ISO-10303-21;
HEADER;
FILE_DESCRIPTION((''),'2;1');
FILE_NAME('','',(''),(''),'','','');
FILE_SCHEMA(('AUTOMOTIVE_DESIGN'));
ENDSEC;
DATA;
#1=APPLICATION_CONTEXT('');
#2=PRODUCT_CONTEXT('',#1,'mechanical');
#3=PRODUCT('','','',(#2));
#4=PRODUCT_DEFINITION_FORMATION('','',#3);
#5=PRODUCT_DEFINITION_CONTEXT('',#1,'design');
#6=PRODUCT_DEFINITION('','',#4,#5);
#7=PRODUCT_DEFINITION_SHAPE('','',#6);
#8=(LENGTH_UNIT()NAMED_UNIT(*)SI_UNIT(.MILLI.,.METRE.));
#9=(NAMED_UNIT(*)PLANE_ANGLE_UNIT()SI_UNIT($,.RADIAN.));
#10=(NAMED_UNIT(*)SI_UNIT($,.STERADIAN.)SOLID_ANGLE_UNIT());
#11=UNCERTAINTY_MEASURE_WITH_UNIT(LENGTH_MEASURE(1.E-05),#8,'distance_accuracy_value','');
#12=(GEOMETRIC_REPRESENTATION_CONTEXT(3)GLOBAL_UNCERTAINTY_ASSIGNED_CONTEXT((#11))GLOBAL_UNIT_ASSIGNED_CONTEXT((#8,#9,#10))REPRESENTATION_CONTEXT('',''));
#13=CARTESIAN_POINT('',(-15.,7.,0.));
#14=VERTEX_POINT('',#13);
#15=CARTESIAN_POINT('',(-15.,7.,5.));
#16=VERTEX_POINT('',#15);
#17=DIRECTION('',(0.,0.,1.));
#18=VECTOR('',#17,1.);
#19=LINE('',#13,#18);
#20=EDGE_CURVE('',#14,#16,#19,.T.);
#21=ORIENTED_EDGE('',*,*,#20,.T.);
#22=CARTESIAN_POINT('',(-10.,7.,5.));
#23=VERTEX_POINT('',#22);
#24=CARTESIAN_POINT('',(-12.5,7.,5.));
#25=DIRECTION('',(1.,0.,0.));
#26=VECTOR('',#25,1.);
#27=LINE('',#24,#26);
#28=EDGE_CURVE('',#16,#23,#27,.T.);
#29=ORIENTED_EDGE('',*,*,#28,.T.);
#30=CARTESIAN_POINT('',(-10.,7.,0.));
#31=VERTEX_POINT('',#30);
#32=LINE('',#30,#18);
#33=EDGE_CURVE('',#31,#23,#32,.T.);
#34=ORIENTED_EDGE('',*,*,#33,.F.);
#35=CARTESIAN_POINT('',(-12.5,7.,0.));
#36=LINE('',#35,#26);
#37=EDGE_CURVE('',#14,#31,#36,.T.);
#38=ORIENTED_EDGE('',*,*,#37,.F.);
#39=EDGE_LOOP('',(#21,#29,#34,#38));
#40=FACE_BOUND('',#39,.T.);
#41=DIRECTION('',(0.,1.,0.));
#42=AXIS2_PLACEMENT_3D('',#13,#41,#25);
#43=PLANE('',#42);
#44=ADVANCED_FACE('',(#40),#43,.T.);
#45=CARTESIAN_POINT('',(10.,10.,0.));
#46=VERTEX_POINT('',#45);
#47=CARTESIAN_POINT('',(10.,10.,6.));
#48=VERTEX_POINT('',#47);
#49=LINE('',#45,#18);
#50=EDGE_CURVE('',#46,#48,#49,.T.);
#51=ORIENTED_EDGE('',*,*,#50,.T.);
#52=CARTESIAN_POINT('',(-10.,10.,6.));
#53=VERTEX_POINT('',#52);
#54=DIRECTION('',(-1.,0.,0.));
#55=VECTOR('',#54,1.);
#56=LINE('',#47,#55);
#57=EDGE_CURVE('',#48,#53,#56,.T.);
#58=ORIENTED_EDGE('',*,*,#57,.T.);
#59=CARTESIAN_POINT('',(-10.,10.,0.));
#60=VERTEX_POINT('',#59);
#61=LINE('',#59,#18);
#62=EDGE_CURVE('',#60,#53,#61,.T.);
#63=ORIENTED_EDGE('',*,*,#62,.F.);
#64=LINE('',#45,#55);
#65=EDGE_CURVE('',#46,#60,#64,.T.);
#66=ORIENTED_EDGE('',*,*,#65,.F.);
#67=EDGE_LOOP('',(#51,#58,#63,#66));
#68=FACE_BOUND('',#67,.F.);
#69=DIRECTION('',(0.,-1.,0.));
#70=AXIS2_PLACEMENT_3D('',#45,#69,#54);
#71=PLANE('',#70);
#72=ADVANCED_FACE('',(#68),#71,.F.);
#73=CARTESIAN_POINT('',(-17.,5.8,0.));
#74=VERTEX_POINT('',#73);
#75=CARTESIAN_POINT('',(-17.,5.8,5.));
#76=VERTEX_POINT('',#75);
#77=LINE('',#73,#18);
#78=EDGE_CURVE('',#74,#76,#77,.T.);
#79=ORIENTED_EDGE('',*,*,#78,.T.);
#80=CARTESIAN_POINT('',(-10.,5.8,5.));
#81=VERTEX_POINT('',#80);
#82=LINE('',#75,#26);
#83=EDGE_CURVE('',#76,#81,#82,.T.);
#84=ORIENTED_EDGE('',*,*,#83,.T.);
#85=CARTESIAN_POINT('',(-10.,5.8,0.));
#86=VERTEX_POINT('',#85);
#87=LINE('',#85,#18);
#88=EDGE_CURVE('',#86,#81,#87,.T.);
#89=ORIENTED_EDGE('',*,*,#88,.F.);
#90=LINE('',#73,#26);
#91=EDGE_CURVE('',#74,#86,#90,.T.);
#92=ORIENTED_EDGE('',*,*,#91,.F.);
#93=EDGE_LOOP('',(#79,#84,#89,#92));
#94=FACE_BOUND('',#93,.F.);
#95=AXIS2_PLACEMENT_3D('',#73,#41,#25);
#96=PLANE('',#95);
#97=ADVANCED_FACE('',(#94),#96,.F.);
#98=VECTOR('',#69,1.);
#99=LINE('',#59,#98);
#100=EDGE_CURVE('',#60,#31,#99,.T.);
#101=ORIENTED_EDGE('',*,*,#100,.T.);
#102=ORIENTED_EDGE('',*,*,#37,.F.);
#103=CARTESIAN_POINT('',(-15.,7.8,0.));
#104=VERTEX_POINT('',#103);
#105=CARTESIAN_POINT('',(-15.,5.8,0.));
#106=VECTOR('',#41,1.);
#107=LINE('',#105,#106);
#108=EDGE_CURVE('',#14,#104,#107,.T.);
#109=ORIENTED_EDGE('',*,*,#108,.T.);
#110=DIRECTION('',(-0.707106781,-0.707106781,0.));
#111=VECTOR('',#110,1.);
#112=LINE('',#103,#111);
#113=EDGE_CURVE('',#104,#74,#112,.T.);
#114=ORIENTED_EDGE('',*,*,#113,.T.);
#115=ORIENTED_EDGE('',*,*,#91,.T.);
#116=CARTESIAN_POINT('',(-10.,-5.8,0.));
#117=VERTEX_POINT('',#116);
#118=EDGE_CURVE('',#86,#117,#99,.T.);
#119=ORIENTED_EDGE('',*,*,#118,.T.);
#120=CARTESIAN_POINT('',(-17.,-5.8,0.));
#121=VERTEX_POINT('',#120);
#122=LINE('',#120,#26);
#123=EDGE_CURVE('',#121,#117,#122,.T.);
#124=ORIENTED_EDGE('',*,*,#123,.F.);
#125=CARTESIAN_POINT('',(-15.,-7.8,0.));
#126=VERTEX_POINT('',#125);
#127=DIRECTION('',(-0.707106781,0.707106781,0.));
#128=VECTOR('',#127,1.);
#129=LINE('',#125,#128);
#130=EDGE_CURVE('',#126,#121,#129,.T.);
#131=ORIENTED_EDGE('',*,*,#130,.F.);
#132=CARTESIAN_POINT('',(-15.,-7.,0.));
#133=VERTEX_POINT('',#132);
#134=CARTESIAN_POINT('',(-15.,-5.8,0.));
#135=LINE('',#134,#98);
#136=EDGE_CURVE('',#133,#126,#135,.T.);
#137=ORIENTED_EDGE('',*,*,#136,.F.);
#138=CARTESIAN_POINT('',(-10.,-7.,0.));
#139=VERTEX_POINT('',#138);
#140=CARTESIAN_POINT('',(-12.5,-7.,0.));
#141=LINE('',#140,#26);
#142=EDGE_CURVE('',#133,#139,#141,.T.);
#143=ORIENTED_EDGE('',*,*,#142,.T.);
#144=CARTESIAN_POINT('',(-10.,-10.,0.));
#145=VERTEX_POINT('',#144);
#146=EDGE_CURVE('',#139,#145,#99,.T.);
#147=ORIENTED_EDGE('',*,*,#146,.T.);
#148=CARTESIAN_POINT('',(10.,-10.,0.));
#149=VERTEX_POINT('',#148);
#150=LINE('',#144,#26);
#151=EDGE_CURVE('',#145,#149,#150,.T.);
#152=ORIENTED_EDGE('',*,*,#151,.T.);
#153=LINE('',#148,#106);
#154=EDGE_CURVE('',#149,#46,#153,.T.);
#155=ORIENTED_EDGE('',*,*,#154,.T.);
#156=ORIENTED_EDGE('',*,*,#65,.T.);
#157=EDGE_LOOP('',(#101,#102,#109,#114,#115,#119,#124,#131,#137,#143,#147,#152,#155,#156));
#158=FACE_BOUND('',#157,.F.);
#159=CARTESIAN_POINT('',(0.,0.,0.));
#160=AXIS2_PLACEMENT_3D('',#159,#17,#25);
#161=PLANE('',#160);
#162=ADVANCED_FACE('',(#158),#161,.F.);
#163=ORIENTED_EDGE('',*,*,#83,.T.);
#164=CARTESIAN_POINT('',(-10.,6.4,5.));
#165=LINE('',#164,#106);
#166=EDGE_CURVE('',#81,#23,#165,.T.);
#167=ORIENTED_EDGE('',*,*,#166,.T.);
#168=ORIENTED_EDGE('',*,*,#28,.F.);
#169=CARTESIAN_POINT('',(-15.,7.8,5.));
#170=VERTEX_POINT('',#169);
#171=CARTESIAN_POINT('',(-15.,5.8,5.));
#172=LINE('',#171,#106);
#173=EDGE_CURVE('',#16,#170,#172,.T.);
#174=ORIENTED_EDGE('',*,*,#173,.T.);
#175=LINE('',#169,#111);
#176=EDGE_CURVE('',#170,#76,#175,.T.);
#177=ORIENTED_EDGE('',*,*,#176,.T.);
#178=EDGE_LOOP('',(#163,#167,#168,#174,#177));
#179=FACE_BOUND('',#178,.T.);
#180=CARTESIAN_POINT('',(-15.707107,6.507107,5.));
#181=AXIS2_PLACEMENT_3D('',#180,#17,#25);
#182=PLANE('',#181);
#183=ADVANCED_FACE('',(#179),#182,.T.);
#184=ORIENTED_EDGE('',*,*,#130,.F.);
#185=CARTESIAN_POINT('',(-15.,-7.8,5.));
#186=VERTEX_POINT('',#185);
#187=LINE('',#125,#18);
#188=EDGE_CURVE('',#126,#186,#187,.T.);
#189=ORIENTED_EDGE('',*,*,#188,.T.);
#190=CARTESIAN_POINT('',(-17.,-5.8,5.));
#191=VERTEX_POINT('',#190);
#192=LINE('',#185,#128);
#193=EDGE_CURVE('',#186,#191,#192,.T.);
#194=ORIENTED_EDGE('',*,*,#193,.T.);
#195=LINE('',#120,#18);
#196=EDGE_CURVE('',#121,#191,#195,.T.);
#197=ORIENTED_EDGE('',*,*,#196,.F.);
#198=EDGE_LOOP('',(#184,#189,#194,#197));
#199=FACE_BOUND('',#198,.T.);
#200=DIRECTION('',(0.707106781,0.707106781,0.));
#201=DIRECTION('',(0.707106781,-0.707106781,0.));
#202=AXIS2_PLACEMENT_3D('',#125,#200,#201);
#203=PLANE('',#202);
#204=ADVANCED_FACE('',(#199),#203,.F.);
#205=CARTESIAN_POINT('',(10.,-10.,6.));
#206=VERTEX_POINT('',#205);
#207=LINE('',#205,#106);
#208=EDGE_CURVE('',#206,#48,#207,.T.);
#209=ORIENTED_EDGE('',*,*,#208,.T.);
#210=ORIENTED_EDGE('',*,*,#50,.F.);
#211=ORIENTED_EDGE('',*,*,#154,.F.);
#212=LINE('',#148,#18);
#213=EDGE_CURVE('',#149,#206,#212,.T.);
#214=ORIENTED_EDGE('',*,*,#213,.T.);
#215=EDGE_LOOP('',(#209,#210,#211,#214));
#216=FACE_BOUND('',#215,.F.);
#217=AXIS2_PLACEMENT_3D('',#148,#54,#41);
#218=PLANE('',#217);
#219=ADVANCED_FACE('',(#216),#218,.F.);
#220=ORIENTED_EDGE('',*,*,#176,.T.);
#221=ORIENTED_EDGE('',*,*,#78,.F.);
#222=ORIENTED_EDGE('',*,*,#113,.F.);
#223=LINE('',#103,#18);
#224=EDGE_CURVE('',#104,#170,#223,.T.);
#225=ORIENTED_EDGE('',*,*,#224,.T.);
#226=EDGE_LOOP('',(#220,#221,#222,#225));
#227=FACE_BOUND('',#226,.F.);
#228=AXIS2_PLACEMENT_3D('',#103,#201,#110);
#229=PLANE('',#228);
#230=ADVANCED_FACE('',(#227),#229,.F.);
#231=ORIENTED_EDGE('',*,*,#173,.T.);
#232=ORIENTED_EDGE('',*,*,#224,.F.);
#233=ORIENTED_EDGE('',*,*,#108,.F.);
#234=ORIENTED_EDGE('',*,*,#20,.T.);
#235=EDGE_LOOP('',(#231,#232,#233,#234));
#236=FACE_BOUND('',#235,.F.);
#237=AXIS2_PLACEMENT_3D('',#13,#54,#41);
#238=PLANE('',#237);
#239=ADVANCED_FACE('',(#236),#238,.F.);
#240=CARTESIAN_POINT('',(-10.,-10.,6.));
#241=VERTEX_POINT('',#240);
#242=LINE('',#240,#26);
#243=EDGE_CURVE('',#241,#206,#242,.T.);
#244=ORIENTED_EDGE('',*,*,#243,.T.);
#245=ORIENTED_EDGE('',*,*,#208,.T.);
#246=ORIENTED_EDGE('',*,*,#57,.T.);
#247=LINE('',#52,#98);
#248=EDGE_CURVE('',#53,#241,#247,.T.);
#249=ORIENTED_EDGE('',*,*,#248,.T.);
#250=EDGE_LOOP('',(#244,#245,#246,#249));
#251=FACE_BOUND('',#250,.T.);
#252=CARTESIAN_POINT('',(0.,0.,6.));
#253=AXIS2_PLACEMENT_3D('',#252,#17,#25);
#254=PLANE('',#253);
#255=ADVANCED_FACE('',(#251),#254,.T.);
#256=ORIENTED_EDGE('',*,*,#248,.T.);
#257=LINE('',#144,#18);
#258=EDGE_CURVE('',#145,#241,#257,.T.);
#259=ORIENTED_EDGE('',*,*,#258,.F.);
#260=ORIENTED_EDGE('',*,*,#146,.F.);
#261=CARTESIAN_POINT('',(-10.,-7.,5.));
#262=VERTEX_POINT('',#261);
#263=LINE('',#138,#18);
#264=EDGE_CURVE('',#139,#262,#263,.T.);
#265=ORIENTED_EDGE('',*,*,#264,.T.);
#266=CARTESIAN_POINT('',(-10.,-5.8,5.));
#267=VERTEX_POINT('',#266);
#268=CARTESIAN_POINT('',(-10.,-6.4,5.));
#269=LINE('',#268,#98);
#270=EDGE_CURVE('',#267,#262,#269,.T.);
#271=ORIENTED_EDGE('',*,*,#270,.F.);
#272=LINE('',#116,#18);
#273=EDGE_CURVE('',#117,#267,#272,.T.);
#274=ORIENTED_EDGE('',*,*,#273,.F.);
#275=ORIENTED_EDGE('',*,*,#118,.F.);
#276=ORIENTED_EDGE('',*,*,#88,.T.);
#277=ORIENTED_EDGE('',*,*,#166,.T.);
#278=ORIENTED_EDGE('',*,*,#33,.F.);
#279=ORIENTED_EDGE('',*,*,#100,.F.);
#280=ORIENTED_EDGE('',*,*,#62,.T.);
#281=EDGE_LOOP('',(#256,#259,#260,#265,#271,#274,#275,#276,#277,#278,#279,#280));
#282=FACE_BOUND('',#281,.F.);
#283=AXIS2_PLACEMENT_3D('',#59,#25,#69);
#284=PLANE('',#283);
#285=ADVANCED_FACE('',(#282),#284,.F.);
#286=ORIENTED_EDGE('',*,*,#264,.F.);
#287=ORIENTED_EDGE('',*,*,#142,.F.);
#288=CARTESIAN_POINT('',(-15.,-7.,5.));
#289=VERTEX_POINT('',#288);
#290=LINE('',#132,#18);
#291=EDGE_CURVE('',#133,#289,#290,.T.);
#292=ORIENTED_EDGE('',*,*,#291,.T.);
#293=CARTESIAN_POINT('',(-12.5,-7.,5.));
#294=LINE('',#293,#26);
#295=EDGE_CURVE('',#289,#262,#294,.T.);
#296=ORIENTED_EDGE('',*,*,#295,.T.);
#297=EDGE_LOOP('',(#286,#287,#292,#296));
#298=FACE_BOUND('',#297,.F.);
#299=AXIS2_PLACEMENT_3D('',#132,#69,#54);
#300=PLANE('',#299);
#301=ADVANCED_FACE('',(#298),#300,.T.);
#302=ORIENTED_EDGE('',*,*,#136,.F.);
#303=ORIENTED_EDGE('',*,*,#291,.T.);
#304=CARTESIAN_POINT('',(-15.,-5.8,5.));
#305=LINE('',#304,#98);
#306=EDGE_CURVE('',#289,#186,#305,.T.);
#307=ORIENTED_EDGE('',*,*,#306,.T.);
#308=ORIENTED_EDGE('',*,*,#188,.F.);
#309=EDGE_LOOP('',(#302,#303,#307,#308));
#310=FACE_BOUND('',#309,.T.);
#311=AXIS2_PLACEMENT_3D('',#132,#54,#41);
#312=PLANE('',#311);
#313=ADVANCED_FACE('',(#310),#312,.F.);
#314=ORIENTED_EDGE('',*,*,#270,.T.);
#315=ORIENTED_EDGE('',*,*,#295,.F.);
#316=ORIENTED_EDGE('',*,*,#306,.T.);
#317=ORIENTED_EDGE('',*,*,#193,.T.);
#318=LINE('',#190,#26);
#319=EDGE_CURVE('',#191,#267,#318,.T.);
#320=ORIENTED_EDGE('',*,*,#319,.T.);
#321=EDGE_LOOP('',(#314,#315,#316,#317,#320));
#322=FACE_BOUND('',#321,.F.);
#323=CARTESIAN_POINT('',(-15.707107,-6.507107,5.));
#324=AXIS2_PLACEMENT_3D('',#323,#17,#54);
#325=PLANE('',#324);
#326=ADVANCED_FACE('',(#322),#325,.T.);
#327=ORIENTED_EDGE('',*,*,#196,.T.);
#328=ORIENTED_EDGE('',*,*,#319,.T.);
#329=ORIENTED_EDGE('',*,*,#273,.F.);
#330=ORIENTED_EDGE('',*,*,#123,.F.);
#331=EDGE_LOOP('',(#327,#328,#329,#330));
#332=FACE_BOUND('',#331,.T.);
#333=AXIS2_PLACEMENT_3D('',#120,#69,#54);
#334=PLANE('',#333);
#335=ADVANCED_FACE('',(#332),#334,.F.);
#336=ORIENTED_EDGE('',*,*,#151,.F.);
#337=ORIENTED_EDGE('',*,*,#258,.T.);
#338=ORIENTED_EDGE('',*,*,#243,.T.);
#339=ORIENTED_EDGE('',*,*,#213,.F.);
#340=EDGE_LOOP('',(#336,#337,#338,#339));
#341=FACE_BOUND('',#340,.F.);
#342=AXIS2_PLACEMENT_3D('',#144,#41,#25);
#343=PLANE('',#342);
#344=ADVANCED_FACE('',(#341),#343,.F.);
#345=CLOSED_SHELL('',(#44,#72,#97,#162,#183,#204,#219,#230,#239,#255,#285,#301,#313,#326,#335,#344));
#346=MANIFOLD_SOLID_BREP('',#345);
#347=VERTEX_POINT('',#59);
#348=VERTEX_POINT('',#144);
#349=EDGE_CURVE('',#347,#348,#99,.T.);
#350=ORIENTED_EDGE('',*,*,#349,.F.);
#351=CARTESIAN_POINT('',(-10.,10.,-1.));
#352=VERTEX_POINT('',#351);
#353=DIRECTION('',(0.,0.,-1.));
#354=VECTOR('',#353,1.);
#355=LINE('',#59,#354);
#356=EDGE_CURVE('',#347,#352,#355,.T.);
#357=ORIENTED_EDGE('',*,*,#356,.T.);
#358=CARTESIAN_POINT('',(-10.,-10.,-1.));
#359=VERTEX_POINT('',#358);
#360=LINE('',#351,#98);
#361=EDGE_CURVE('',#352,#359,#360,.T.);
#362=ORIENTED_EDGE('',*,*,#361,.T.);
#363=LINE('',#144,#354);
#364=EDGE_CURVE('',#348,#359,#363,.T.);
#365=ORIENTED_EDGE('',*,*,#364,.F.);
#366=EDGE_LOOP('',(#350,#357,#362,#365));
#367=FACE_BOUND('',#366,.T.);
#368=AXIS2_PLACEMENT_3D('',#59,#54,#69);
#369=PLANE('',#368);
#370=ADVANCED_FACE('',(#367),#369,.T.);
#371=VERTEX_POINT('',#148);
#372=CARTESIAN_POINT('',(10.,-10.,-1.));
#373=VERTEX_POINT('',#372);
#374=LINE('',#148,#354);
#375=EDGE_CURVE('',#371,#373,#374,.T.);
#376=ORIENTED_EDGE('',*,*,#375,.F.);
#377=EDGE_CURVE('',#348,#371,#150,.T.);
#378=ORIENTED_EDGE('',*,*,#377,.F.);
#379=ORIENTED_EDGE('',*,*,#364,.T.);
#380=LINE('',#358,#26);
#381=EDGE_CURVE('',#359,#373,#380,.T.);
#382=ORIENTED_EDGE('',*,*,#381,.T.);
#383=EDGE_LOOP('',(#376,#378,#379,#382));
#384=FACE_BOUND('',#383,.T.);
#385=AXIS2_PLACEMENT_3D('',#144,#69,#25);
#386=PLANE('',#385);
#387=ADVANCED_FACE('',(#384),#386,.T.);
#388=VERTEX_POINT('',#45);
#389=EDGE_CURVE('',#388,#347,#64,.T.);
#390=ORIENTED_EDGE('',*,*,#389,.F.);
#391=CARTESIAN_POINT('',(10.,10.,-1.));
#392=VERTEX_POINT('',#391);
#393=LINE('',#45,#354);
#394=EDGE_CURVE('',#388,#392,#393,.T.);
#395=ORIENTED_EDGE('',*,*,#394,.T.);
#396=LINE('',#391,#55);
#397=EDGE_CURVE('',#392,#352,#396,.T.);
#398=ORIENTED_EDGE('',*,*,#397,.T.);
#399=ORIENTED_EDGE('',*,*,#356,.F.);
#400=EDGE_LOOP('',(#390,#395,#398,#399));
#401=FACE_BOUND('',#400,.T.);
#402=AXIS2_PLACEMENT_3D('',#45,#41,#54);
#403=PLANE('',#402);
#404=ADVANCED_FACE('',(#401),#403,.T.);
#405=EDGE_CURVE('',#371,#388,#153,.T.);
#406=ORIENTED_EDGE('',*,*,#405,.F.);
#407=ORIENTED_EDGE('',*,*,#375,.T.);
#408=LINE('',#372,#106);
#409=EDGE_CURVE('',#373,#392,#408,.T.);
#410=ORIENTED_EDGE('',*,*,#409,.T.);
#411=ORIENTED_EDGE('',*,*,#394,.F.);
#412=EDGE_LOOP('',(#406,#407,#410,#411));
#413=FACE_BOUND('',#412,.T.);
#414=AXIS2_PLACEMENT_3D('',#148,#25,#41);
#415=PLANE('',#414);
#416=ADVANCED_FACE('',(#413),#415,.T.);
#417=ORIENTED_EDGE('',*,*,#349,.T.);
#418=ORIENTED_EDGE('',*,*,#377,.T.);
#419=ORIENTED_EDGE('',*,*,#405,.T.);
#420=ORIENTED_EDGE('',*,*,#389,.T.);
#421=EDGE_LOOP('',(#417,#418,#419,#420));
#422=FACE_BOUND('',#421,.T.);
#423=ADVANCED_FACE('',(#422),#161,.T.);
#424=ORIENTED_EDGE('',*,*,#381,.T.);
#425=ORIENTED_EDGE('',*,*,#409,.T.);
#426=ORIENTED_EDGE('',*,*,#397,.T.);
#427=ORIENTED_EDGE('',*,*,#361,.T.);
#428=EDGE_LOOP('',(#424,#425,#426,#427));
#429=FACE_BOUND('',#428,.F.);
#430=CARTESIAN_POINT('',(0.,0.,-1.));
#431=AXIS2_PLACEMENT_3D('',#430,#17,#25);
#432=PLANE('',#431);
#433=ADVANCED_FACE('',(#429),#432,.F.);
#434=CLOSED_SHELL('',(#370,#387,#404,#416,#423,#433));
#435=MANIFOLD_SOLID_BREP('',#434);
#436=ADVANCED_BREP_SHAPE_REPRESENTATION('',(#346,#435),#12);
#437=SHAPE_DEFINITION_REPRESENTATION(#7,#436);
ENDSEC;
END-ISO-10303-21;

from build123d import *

# Parameters (mm, degrees)
F0_W     = 5
F0_H     = 1.2
F1_DEPTH = 5
F2_DEPTH = 1
F3_DEPTH = 6


with BuildPart() as f1:
    # F0 (on Top) → F1 (new body)
    with BuildSketch(Plane.XY):
        Polygon((-15, 5.8), (-15, 7), (-15, 7.8), (-17, 5.8), align=None)
        with Locations((-12.5, 6.4)):
            Rectangle(F0_W, F0_H)
    extrude(amount=F1_DEPTH)



with BuildPart() as f2:
    # F0 (on Top) → F2 (new body)
    with BuildSketch(Plane.XY):
        Polygon((10, -10), (10, 10), (-10, 10), (-10, 7), (-10, 5.8), (-10, -10), align=None)
    extrude(amount=-F2_DEPTH)


with BuildPart() as f1_1:
    add(f1.part)
    # F3 (add): a face of the model
    f3_faces = [f2.part.faces().sort_by_distance(p)[0] for p in [
        (0, 0, 0),
    ]]
    extrude(f3_faces, amount=F3_DEPTH)

    # F4: F1 across plane


with BuildPart() as f1_2:
    add(f1_1.part)
    add(f1_1.part.mirror(Plane.XZ))


solid = Compound([f2.part, f1_2.part])
